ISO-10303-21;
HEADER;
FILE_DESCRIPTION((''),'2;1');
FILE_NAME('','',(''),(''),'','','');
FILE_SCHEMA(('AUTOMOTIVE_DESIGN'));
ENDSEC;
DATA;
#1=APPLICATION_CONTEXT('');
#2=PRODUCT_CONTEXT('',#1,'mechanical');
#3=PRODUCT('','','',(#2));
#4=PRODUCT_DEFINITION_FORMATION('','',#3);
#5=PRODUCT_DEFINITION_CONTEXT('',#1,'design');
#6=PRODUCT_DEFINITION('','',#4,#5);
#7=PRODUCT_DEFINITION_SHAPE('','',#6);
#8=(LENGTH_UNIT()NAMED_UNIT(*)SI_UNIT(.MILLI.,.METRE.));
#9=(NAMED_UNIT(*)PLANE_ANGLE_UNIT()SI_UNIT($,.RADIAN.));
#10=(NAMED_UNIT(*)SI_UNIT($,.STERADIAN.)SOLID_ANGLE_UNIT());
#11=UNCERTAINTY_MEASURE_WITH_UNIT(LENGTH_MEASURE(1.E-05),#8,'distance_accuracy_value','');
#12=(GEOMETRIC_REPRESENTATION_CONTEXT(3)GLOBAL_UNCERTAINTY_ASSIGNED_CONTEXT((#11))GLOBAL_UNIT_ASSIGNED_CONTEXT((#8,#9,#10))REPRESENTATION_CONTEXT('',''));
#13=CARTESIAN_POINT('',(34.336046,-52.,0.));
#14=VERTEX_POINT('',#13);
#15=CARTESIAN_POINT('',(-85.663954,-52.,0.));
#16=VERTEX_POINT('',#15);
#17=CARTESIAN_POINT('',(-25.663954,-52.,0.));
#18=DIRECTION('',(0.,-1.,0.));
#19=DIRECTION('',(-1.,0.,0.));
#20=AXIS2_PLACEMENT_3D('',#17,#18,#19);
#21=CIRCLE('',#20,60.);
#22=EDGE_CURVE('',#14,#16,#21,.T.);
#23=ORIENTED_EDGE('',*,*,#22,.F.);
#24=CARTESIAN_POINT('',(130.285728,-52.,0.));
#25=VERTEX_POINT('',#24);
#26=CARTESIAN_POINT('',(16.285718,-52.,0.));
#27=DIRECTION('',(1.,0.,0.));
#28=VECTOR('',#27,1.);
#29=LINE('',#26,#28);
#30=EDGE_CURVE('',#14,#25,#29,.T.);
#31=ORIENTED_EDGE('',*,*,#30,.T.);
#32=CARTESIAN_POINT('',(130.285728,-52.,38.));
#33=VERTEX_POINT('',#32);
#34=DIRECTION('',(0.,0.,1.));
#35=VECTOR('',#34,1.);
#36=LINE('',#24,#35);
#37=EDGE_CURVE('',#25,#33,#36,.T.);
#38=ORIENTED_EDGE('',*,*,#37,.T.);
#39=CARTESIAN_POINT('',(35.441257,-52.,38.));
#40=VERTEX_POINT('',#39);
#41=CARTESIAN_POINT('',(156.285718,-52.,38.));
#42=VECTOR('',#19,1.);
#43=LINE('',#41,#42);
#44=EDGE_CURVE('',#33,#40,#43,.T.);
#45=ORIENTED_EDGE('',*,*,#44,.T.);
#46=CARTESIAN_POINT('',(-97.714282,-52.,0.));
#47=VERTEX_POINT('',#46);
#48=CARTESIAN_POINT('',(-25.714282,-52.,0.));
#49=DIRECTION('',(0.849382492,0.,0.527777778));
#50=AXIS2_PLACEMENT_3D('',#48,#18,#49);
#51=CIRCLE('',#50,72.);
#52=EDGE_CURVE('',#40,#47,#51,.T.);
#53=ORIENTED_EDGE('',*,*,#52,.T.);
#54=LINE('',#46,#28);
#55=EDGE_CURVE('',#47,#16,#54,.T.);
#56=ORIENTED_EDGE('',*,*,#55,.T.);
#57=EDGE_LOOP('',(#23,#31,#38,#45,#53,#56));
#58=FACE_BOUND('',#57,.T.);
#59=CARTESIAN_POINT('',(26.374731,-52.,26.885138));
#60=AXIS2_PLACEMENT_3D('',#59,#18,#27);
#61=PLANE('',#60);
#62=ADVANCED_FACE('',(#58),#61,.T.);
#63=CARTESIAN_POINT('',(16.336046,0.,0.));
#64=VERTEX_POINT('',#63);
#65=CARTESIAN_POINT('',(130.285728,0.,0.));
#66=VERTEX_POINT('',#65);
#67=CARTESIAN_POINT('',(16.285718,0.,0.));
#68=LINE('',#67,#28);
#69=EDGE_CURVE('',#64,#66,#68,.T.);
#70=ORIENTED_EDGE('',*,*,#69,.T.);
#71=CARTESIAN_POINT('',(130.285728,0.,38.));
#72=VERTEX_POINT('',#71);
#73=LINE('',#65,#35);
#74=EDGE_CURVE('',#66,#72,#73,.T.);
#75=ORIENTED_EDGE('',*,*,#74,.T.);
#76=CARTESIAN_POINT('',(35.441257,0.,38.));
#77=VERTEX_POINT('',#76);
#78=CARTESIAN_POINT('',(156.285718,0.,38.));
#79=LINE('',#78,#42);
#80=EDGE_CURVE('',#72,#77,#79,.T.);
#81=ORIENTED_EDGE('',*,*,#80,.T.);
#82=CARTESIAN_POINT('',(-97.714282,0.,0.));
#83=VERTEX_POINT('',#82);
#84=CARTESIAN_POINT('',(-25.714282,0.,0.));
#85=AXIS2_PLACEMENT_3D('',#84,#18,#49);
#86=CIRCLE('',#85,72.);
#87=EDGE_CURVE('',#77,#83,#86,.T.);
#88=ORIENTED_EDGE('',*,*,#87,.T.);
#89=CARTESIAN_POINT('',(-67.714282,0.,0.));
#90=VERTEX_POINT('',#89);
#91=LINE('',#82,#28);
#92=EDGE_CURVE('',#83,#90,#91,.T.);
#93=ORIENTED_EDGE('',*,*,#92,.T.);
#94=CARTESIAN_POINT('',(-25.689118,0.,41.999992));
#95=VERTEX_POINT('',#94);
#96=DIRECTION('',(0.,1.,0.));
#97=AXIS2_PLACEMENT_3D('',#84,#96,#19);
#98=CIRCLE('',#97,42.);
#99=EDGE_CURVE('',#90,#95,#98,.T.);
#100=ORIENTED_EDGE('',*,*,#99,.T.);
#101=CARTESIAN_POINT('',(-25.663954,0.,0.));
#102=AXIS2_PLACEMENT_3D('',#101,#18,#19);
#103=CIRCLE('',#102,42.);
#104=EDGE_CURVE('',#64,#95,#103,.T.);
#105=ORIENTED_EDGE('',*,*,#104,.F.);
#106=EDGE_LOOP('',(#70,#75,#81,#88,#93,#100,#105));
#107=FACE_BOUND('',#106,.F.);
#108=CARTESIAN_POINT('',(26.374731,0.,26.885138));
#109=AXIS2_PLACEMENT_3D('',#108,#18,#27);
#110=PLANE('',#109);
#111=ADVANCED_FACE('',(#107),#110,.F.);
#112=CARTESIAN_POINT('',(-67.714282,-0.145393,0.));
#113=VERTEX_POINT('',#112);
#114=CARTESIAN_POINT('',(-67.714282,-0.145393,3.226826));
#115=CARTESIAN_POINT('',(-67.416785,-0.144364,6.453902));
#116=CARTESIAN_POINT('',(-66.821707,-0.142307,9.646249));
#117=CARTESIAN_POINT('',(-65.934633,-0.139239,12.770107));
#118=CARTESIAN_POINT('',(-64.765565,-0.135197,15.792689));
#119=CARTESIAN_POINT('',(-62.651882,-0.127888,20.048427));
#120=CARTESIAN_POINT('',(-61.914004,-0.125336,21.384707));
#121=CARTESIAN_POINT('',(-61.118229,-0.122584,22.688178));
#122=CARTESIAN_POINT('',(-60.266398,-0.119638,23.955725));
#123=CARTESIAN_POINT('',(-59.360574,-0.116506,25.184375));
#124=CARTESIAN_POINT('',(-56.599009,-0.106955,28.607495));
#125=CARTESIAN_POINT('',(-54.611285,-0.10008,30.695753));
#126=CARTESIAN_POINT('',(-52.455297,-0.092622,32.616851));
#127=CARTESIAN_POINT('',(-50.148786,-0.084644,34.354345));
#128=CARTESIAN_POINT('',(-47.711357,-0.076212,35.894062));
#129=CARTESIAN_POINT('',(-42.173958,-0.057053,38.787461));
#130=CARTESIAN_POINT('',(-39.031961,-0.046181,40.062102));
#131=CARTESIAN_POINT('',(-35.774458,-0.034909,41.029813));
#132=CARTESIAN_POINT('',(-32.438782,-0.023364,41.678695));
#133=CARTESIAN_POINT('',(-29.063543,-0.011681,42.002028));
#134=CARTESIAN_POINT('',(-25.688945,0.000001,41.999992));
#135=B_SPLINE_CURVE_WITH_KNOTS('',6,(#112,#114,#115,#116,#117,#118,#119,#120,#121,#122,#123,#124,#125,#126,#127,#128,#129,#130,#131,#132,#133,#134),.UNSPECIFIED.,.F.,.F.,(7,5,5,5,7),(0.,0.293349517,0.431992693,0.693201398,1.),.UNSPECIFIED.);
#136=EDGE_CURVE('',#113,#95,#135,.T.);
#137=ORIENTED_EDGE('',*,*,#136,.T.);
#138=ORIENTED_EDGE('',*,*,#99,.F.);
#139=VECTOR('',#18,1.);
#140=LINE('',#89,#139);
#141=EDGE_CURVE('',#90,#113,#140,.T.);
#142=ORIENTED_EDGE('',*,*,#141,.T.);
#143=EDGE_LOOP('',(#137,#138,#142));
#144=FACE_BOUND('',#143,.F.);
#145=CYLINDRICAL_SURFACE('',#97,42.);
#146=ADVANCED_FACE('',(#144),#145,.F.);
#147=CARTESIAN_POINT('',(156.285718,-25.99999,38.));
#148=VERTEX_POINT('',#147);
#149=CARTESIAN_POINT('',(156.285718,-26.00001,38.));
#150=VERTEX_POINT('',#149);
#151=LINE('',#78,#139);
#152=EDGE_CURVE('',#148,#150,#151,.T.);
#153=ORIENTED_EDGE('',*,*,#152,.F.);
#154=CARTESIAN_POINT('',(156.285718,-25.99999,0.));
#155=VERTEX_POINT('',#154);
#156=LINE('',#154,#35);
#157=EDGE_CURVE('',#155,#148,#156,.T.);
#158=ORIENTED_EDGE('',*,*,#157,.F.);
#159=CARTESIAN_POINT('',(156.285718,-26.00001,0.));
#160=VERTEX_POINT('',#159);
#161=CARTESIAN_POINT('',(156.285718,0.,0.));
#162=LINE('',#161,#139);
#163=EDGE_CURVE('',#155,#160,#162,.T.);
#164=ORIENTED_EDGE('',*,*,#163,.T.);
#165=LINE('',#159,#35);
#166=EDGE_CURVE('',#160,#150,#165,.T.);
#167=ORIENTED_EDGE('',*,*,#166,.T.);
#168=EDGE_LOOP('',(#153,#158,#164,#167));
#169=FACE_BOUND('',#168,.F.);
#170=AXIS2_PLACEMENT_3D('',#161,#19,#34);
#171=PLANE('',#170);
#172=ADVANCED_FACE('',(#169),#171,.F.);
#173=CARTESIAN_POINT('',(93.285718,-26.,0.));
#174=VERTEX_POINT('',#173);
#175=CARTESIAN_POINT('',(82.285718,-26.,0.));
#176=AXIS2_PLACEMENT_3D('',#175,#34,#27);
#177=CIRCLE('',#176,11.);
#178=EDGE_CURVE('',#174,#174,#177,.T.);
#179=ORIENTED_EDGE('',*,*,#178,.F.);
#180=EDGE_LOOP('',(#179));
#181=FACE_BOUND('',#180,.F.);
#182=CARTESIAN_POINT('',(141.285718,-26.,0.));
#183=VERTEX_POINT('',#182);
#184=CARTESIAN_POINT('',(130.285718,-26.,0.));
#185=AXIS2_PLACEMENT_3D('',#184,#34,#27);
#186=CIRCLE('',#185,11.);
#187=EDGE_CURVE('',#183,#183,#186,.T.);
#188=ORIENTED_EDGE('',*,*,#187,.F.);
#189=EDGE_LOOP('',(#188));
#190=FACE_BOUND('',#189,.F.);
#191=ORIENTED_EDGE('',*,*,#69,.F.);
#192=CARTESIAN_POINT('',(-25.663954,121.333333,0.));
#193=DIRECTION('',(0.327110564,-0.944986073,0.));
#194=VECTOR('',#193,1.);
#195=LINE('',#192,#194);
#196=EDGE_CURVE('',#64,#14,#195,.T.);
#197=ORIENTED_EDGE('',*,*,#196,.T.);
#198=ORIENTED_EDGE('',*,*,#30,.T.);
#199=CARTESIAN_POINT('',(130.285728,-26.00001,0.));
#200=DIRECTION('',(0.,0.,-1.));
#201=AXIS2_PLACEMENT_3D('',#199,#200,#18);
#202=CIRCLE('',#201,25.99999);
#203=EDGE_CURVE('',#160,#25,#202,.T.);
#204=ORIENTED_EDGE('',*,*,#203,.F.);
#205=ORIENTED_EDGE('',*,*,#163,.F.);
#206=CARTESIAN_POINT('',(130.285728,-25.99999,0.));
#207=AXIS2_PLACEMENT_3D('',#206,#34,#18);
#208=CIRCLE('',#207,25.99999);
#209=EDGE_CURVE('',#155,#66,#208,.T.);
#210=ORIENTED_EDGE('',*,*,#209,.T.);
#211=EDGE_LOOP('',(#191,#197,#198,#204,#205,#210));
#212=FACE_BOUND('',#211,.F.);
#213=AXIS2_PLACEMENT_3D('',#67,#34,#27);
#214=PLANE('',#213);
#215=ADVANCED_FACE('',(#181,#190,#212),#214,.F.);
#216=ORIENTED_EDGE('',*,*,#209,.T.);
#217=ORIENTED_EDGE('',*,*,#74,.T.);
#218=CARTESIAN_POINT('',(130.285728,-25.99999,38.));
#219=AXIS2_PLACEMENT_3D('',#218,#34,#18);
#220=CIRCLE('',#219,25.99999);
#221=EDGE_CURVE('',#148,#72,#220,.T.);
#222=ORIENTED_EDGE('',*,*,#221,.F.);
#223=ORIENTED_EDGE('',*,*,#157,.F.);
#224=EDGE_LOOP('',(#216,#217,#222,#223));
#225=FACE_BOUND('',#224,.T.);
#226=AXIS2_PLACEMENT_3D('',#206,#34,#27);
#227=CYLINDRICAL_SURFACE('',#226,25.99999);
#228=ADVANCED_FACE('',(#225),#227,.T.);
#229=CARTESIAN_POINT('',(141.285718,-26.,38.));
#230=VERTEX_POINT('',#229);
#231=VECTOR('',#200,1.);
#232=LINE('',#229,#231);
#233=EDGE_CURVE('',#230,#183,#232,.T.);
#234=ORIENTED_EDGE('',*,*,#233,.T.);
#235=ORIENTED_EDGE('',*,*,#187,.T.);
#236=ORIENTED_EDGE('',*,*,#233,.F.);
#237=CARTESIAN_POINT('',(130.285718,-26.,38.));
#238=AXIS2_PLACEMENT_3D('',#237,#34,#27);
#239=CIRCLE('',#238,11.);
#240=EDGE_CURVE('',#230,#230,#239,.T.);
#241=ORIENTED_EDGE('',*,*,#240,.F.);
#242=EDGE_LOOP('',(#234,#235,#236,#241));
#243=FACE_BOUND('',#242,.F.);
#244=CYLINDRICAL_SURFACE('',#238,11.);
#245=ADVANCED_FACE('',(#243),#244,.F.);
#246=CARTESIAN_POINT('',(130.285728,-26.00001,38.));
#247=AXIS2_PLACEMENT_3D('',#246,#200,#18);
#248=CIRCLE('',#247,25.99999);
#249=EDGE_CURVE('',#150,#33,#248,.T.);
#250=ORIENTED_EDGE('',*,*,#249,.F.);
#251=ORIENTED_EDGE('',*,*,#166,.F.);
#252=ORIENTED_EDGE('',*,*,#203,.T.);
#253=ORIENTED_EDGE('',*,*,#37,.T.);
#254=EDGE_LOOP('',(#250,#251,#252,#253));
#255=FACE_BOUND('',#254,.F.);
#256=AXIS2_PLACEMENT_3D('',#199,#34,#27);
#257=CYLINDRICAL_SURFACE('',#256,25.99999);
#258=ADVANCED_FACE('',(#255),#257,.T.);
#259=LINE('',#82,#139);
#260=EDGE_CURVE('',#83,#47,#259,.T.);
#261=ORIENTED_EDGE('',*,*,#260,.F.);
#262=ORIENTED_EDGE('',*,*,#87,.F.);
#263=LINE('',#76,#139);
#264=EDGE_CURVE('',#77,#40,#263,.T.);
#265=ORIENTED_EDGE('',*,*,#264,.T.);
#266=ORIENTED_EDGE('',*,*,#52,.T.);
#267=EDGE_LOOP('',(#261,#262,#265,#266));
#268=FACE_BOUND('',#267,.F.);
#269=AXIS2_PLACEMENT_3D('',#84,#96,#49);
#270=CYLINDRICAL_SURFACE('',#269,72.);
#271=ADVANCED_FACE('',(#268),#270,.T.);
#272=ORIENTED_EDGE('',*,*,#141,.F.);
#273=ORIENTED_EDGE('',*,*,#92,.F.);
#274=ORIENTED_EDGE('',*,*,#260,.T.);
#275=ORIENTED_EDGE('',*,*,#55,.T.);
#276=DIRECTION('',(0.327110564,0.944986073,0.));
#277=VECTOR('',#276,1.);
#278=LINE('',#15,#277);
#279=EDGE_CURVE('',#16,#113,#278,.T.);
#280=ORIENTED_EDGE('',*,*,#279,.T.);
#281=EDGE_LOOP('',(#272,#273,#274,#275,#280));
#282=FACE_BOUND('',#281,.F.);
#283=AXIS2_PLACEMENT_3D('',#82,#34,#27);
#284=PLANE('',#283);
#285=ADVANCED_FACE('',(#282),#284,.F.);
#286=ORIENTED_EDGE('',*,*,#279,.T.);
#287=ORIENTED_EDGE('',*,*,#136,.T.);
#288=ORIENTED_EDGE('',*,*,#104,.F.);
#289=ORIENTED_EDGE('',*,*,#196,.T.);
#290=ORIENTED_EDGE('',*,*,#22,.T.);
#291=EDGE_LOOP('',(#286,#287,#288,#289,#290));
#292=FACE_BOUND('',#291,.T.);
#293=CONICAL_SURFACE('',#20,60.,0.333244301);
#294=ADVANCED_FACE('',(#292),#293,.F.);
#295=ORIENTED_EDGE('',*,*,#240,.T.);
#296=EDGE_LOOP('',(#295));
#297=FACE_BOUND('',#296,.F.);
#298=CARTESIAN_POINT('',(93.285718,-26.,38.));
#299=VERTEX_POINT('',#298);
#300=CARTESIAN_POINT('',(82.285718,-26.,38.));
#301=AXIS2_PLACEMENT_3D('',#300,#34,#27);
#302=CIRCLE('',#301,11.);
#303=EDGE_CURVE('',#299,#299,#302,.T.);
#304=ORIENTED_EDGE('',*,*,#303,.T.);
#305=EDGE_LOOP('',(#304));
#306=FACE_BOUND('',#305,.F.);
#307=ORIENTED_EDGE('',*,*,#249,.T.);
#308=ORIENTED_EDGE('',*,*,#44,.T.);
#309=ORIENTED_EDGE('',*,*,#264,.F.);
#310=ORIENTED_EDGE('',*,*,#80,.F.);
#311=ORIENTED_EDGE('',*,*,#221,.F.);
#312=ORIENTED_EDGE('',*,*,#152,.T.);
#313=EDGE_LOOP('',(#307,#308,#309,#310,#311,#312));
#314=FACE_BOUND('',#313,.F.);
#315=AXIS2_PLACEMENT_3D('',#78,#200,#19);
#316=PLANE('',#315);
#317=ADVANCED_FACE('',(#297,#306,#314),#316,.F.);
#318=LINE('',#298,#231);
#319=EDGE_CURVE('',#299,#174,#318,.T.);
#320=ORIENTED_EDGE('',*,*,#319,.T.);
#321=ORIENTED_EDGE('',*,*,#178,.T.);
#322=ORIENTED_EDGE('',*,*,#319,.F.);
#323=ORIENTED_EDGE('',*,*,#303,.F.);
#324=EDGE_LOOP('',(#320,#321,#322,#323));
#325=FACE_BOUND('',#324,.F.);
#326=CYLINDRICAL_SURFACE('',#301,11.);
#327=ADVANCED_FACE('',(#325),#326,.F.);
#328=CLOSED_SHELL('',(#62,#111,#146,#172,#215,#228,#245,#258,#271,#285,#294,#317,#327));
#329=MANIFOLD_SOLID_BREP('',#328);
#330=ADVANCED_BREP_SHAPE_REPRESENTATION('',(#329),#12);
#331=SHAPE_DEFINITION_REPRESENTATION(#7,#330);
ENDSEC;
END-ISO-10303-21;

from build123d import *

# Parameters (mm, degrees)
F1_DEPTH = 52
F3_R     = 25.99999
F2_R     = 11
F4_DEPTH = 38
F5_DEPTH = 38


# Not quite as in the source:
# - a fillet or chamfer is up to 0.001 mm smaller than in the source, because OpenCascade refuses the exact size


with BuildPart() as f1:
    # F0 (on Front) → F1 (new body)
    with BuildSketch(Plane.XZ):
        with BuildLine():
            Line((46.2857175011, 0), (156.2857175011, 0))
            Line((156.2857175011, 0), (156.2857175011, 38))
            Line((156.2857175011, 38), (35.4412569068, 38))
            ThreePointArc((35.4412569068, 38), (-45.4728396677, 69.2358246763), (-97.7142824989, 0))
            Line((-97.7142824989, 0), (-67.7142824989, 0))
            ThreePointArc((-67.7142824989, 0), (-25.7142824989, 42), (16.2857175011, 0))
            Line((16.2857175011, 0), (46.2857175011, 0))
        make_face()
    extrude(amount=F1_DEPTH)

    # F3 (radius 26 in the source; OpenCascade refuses exactly that, so slightly less here)
    f3_edges = [f1.edges().sort_by_distance(p)[0] for p in [
        (156.285718, 0, 19),
        (156.285718, -52, 19),
    ]]
    fillet(f3_edges, radius=F3_R)

    # F2 (on face) → F4 (cut)
    with BuildSketch(Plane.XY.offset(38)):
        with Locations((130.2857175011, -26)):
            Circle(F2_R)
    extrude(amount=-F4_DEPTH, mode=Mode.SUBTRACT)

    # F2 (on face) → F5 (cut)
    with BuildSketch(Plane.XY.offset(38)):
        with Locations((82.2857175011, -26)):
            Circle(F2_R)
    extrude(amount=-F5_DEPTH, mode=Mode.SUBTRACT)

    # F6 (on face) → F7 (revolve, cut)
    with BuildSketch(Plane(origin=(0, 0, 0), x_dir=(1, 0, 0), z_dir=(0, 0, -1))):
        Polygon((-25.6639542129, 52), (-85.6639542129, 52), (-67.6639542129, 0), (-25.6639542129, 0), align=None)
    revolve(axis=Axis((-25.6639542129, -26, 0), (0, -1, 0)), mode=Mode.SUBTRACT)


solid = f1.part
